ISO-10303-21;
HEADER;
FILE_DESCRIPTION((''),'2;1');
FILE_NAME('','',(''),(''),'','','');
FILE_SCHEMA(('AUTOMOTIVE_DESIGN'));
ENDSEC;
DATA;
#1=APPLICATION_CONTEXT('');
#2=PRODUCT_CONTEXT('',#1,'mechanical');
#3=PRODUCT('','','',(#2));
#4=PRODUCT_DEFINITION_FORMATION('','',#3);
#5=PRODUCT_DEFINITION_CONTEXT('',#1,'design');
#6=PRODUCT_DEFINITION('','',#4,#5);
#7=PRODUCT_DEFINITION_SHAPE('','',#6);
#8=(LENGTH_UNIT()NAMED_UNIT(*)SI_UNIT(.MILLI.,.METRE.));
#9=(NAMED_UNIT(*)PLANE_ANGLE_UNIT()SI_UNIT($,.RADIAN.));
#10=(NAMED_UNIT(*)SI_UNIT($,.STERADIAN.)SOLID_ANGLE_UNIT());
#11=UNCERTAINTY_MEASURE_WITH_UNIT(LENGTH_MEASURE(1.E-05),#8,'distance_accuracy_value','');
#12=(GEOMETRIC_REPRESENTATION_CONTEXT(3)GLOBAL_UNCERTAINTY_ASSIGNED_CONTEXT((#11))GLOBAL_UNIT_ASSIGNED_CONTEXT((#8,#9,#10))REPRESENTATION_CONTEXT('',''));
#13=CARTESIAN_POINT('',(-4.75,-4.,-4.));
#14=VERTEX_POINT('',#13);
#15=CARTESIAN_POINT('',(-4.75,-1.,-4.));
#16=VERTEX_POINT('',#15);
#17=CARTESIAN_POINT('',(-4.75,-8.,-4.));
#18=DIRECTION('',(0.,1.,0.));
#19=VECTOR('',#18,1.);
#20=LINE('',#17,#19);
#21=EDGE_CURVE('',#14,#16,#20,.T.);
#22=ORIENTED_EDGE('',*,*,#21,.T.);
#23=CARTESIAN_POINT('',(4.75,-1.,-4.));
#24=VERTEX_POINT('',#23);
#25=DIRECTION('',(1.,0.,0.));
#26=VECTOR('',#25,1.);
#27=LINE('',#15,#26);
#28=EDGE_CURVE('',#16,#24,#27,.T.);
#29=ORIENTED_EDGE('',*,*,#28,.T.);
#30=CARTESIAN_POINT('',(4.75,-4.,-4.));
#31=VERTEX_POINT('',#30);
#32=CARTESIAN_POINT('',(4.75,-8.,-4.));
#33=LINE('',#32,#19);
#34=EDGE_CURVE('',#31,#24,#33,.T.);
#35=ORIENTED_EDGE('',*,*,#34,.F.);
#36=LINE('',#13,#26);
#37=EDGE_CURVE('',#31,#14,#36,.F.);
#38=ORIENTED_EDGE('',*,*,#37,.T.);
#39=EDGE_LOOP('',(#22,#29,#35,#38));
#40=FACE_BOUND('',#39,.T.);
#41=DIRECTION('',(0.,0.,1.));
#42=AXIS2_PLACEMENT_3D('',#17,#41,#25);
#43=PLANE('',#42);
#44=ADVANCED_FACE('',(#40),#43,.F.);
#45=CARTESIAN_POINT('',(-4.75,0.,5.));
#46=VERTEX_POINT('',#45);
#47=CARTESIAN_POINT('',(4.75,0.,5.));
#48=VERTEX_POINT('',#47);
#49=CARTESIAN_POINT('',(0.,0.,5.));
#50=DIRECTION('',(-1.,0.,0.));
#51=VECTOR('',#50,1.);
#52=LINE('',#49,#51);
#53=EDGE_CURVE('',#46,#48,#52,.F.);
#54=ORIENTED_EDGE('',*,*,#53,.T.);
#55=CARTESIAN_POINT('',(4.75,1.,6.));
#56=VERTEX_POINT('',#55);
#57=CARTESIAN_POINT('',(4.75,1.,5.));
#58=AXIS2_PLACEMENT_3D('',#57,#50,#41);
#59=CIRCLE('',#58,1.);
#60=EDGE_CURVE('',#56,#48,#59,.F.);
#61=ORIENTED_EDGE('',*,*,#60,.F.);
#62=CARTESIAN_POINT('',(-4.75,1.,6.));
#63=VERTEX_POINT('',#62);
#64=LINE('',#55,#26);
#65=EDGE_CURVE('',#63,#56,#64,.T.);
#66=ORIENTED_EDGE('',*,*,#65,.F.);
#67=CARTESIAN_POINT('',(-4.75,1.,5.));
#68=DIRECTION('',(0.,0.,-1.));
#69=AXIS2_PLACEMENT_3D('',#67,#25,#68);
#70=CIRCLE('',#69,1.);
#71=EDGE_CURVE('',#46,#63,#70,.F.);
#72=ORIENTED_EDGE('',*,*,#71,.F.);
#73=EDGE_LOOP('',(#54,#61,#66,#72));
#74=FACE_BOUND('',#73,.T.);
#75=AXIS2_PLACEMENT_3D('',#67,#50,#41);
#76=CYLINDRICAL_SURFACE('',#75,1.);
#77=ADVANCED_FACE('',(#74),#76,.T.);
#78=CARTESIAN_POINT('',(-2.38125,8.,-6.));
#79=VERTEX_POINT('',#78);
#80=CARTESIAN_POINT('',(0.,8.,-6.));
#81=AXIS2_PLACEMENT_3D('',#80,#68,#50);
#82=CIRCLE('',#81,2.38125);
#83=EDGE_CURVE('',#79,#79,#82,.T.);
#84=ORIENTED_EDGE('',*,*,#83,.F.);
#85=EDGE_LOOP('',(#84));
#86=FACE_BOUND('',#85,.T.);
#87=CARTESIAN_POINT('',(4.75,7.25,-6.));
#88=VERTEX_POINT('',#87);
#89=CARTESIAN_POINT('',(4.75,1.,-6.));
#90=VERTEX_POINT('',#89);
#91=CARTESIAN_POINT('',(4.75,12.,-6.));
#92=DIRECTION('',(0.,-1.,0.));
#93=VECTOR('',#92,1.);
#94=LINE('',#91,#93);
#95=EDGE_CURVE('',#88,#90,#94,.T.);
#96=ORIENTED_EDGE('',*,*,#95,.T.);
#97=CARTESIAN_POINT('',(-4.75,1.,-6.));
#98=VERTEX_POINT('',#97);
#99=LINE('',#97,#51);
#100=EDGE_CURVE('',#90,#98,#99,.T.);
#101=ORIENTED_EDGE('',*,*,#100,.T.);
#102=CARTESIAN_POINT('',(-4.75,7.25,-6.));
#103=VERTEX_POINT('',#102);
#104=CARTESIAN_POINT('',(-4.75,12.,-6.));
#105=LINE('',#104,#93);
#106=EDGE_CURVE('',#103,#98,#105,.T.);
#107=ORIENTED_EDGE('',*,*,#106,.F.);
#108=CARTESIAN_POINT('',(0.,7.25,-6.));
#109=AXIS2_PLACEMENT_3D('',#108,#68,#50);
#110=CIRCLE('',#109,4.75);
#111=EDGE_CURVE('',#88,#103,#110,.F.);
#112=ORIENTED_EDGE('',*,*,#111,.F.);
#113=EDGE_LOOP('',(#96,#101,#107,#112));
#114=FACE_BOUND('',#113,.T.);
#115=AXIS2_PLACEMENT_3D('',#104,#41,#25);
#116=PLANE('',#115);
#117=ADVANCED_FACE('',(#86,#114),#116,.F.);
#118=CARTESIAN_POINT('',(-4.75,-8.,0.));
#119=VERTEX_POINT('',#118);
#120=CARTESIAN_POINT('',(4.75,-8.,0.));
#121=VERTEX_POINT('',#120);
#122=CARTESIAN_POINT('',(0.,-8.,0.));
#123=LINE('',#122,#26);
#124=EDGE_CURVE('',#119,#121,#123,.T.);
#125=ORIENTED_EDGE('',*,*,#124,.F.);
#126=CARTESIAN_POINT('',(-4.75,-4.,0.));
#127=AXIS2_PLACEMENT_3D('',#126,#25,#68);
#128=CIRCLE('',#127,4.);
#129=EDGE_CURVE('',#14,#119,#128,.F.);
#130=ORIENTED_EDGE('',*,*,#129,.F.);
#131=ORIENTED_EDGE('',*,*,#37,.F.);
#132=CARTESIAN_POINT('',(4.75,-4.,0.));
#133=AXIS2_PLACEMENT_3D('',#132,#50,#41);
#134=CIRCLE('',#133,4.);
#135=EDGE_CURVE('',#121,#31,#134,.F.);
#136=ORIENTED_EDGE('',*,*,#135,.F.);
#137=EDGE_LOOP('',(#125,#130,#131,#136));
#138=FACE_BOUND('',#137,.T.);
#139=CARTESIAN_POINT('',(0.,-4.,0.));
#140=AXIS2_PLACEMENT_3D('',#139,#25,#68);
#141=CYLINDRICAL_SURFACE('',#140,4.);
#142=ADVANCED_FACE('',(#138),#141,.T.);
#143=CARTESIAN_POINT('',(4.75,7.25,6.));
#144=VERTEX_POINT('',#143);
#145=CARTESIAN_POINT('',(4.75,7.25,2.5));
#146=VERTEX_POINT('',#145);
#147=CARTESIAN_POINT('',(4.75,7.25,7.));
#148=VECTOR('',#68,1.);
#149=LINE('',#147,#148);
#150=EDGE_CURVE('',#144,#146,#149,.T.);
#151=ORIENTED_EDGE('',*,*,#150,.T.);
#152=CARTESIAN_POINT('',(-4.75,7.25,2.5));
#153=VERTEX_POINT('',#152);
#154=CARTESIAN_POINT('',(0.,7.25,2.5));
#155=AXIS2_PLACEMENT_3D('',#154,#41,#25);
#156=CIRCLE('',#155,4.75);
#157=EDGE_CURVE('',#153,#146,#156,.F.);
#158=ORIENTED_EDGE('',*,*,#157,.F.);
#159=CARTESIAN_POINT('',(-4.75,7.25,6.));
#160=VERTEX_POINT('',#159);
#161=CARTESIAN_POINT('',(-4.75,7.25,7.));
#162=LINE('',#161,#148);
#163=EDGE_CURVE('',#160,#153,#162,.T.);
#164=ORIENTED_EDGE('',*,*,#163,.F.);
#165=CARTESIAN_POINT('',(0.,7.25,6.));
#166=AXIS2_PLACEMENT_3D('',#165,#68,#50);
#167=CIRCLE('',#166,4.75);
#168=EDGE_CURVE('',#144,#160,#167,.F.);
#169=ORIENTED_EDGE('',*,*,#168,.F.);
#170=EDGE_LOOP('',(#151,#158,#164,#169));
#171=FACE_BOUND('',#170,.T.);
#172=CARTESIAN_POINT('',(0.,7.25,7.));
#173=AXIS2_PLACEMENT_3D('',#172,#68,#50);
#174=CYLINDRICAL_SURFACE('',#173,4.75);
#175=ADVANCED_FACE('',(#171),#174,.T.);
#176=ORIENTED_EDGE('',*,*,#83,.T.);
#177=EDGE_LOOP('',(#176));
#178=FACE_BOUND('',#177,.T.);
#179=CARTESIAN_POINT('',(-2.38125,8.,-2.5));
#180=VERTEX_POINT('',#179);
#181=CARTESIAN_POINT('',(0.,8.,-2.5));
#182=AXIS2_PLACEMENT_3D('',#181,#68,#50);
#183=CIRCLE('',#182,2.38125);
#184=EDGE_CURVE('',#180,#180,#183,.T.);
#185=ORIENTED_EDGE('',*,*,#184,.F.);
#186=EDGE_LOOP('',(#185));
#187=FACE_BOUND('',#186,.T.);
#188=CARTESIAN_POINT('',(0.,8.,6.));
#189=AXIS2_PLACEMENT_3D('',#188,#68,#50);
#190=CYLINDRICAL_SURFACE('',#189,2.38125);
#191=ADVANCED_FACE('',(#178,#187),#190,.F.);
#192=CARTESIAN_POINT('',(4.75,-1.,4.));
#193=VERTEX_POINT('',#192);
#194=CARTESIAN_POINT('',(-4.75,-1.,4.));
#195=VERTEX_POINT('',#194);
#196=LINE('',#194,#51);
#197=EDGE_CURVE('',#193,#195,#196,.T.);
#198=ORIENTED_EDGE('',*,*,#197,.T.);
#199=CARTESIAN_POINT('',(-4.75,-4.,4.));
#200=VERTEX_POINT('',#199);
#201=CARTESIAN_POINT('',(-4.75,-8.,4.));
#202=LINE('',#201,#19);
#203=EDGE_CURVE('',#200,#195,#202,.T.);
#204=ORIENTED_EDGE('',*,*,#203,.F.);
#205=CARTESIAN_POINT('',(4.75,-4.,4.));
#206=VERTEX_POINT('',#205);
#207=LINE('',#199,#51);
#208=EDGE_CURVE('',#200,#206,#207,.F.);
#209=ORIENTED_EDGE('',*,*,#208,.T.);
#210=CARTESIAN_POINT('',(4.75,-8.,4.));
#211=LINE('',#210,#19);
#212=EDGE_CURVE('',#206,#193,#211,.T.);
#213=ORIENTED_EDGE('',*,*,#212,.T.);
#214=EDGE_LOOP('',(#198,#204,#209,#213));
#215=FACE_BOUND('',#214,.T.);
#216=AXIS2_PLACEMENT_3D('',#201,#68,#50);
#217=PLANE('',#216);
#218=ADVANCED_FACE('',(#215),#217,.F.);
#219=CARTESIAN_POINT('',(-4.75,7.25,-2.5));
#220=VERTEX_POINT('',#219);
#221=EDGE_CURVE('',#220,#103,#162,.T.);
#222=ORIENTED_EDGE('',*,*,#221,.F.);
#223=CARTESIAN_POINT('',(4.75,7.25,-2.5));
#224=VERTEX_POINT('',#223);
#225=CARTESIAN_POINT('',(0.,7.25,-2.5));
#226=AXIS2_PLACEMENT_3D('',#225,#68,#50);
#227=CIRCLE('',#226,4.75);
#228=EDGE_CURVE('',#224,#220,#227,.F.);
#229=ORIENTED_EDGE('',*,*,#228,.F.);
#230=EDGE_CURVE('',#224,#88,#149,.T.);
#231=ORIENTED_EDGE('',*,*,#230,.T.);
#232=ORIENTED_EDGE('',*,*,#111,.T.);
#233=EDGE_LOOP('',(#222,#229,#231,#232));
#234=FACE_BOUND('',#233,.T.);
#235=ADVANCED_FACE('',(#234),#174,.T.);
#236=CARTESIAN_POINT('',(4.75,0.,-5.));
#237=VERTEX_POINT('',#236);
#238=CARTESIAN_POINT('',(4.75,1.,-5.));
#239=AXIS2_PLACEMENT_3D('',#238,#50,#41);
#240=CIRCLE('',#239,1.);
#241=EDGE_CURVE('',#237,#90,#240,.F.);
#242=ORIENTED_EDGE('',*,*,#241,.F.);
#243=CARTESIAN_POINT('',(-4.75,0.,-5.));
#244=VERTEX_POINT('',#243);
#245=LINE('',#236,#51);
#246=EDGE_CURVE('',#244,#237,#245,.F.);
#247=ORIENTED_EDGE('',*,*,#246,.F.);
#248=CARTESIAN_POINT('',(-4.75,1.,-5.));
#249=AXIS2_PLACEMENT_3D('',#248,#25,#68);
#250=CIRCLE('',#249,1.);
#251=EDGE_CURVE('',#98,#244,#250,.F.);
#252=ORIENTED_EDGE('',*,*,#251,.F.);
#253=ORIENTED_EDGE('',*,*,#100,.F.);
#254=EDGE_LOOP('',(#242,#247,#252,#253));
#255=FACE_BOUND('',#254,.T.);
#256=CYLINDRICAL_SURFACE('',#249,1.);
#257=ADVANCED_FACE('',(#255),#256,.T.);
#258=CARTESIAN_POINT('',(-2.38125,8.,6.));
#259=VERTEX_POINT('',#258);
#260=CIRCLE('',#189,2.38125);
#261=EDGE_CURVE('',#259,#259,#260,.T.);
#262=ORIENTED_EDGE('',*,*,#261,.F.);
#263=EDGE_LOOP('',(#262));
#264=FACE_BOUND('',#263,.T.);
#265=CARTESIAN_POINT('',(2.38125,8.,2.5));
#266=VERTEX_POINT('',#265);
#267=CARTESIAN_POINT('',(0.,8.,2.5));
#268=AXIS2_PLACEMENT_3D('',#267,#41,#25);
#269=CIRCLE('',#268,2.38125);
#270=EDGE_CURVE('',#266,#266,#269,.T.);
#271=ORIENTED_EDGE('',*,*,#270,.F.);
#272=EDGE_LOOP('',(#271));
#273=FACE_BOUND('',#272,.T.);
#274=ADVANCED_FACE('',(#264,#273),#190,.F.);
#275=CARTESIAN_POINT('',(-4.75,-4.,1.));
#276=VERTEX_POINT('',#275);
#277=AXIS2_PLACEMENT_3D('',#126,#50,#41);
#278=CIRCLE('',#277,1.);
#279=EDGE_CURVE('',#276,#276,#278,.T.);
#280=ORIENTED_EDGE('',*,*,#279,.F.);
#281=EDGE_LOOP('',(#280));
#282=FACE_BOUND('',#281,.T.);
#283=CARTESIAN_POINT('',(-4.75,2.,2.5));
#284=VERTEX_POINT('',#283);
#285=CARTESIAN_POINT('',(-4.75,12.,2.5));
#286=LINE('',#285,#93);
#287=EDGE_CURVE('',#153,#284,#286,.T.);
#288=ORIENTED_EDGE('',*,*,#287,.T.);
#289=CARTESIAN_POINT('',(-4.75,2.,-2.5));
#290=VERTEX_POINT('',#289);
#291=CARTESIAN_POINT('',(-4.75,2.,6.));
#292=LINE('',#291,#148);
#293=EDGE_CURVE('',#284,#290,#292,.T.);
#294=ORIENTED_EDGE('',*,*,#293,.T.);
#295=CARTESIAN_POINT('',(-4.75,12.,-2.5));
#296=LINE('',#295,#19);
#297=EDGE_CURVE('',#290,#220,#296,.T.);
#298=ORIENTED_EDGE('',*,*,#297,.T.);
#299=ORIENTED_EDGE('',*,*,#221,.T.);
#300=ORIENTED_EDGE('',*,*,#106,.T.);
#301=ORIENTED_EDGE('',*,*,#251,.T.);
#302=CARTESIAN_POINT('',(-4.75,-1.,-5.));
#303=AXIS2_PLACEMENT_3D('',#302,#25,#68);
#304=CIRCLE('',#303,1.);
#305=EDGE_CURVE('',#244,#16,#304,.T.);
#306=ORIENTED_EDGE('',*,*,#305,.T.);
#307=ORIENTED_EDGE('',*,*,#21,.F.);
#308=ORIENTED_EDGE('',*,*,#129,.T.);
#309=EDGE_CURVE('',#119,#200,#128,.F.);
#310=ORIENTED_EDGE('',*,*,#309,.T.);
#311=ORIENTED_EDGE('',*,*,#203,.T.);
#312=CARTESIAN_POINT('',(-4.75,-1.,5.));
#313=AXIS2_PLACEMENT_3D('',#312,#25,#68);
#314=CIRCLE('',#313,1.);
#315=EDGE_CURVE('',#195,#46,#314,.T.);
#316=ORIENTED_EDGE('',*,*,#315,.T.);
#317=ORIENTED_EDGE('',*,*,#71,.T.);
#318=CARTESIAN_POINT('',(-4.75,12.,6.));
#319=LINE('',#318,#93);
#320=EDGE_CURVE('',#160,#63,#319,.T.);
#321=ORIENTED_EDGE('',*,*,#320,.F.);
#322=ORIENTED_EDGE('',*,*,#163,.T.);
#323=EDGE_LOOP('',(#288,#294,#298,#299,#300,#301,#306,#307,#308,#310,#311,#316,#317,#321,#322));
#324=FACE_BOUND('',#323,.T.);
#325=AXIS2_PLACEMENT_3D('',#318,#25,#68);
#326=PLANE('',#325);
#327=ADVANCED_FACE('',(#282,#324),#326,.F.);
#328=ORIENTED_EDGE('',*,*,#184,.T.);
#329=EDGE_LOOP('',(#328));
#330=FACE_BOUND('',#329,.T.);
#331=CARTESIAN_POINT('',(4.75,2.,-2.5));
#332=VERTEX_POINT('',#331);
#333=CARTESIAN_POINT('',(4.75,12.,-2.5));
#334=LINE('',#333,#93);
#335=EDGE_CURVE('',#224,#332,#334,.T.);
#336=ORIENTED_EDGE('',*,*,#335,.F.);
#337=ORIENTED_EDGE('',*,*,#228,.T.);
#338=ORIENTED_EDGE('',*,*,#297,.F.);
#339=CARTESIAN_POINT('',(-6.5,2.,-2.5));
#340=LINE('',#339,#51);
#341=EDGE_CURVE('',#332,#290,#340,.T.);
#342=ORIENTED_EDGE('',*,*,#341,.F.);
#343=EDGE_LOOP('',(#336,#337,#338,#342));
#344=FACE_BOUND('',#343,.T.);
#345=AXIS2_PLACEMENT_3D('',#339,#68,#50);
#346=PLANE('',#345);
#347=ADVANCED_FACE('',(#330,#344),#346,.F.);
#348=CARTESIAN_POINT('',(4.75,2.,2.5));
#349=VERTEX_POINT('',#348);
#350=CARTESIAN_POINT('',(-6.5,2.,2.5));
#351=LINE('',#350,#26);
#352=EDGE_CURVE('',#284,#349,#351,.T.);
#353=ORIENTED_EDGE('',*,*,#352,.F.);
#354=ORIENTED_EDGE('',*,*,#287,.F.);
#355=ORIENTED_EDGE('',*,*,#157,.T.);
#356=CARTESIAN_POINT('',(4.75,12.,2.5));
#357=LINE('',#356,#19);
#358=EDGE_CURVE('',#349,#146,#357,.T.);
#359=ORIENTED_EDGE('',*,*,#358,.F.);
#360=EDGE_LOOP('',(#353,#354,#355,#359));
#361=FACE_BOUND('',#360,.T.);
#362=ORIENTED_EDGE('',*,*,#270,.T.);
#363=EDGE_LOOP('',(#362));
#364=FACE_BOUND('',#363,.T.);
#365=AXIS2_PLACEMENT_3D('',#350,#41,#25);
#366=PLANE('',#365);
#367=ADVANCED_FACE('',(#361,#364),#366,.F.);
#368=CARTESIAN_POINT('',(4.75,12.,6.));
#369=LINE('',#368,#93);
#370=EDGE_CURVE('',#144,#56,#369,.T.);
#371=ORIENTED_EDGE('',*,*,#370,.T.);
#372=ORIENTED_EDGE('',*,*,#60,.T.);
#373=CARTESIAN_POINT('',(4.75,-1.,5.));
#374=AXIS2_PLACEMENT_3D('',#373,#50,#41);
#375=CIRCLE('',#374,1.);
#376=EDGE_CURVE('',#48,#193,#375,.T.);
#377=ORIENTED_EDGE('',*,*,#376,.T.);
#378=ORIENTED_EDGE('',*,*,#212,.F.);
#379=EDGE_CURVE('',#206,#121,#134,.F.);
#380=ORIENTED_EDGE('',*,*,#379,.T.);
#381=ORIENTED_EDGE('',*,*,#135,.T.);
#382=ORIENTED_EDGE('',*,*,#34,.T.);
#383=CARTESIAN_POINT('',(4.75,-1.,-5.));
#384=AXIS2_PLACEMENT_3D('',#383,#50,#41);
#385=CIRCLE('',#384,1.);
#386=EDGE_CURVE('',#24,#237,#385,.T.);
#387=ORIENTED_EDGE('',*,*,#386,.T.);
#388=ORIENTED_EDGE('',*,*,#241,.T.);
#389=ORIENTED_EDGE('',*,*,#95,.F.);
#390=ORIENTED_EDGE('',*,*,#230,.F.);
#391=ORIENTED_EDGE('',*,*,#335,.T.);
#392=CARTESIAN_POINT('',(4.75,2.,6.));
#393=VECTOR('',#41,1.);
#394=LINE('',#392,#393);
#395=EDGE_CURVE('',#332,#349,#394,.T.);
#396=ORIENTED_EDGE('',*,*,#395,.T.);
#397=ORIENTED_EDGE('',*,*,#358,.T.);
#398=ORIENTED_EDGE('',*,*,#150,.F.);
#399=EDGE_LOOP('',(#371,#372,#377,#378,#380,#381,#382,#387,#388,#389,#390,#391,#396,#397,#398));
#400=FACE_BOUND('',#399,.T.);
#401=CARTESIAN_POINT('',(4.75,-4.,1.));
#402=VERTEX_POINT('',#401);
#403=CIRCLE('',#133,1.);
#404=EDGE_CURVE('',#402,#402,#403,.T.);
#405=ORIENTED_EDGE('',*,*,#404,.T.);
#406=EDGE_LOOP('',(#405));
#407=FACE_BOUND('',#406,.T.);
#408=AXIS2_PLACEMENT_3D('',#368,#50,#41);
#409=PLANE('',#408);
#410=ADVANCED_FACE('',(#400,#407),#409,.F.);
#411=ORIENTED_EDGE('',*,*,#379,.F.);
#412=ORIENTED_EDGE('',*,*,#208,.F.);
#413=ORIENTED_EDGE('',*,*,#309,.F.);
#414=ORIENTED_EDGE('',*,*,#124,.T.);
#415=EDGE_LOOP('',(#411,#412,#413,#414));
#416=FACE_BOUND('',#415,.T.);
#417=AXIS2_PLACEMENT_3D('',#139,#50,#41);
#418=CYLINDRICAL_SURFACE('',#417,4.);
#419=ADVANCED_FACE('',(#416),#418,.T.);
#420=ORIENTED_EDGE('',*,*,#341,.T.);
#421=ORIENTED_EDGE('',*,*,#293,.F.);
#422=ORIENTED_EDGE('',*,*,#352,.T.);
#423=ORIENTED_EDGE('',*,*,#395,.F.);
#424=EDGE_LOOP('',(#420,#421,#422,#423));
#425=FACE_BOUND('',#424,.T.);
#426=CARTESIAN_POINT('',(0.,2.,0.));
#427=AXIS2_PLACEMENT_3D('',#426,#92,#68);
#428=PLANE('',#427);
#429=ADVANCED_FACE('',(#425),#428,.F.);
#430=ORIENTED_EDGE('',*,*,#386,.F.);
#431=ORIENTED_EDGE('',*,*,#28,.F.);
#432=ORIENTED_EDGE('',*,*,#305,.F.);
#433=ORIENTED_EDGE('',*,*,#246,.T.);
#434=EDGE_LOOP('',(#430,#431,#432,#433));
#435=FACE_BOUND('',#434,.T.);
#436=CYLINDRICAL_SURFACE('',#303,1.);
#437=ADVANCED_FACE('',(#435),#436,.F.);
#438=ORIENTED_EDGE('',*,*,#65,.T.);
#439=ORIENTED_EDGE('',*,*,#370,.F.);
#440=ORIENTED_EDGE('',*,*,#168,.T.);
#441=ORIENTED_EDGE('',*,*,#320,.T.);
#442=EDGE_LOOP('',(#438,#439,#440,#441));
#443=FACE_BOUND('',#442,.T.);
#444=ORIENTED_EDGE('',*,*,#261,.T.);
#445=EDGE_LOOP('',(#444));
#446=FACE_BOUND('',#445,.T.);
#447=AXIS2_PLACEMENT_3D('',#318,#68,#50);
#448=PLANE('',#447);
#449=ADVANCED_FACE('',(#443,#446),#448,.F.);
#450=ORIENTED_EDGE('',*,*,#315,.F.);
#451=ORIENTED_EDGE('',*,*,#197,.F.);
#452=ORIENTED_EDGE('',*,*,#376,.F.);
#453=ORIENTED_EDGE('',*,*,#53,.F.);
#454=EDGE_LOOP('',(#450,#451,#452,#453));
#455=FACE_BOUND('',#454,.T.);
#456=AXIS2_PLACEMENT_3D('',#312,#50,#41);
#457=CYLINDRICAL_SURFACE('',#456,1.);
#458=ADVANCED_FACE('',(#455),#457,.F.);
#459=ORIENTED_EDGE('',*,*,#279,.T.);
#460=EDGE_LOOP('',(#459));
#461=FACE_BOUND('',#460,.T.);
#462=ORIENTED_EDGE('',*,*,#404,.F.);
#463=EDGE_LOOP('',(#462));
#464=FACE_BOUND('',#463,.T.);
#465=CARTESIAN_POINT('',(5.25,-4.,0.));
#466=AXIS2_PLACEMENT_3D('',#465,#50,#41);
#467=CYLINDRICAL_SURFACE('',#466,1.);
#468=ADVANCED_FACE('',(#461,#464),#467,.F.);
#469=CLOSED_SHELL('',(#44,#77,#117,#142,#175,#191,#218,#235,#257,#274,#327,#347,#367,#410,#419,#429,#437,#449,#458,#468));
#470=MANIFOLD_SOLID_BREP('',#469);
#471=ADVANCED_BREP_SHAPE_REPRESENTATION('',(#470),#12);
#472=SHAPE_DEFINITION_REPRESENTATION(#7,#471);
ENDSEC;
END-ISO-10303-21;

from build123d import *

# Parameters (mm, degrees)
SKETCH1_W           = 9.5
SKETCH1_H           = 12
BOSS_EXTRUDE1_DEPTH = 12
SKETCH2_W           = 13
SKETCH2_H           = 5
CUT_EXTRUDE1_DEPTH  = 10
SKETCH3_R           = 2.38125
CUT_EXTRUDE2_DEPTH  = 18.622783549
CUT_EXTRUDE3_START  = -13
CUT_EXTRUDE3_DEPTH  = 31.622783549
SKETCH6_W           = 9.5
SKETCH6_H           = 8
BOSS_EXTRUDE3_DEPTH = 8
SKETCH7_R           = 1
CUT_EXTRUDE5_DEPTH  = 10
FILLET2_R           = 4
FILLET3_START       = -6
FILLET3_DEPTH       = 12
FILLET3_START_2     = -4.75
FILLET3_2_DEPTH     = 9.5


with BuildPart() as part:
    # Sketch1 → Boss-Extrude1 (new body)
    with BuildSketch(Plane(origin=(0, 0, 0), x_dir=(1, 0, 0), z_dir=(0, 1, 0))):
        Rectangle(SKETCH1_W, SKETCH1_H)
    extrude(amount=BOSS_EXTRUDE1_DEPTH)

    # Sketch2 → Cut-Extrude1 (cut)
    with BuildSketch(Plane(origin=(0, 12, 0), x_dir=(1, 0, 0), z_dir=(0, 1, 0))):
        Rectangle(SKETCH2_W, SKETCH2_H)
    extrude(amount=-CUT_EXTRUDE1_DEPTH, mode=Mode.SUBTRACT)

    # Sketch3 → Cut-Extrude2 (cut, through all)
    with BuildSketch(Plane(origin=(0, 0, -6), x_dir=(-1, 0, 0), z_dir=(0, 0, -1))):
        with Locations((0, 8)):
            Circle(SKETCH3_R)
    extrude(amount=-CUT_EXTRUDE2_DEPTH, mode=Mode.SUBTRACT)

    # Sketch4 → Cut-Extrude3 (cut)
    with BuildSketch(Plane(origin=(0, 0, -6), x_dir=(-1, 0, 0), z_dir=(0, 0, -1)).offset(CUT_EXTRUDE3_START)):
        with BuildLine():
            Line((-4.75, 12), (-4.75, 7.25))
            ThreePointArc((-4.75, 7.25), (-3.358757211, 10.608757211), (0, 12))
            Line((0, 12), (-4.75, 12))
        make_face()
    cut_extrude3 = extrude(amount=CUT_EXTRUDE3_DEPTH, mode=Mode.SUBTRACT)

    # Mirror1: Cut-Extrude3 across plane
    add(cut_extrude3.mirror(Plane(origin=(0, 0, 0), x_dir=(0, 0, 1), z_dir=(1, 0, 0))), mode=Mode.SUBTRACT)

    # Sketch6 → Boss-Extrude3 (add)
    with BuildSketch(Plane.XZ):
        Rectangle(SKETCH6_W, SKETCH6_H)
    extrude(amount=BOSS_EXTRUDE3_DEPTH)

    # Sketch7 → Cut-Extrude5 (cut)
    with BuildSketch(Plane.ZY.offset(4.75)):
        with Locations((0, -4)):
            Circle(SKETCH7_R)
    extrude(amount=-CUT_EXTRUDE5_DEPTH, mode=Mode.SUBTRACT)

    # Fillet2
    fillet2_edges = [part.edges().sort_by_distance(p)[0] for p in [
        (0, -8, 4),
        (0, -8, -4),
    ]]
    fillet(fillet2_edges, radius=FILLET2_R - 0.0001)  # a hair under: the kernel refuses the full size

    # Fillet3: read off the stored shape, not the designer's step
    # Fillet3 outline → Fillet3 (cut)
    with BuildSketch(Plane.YZ.offset(FILLET3_START)):
        with BuildLine():
            Line((0, 6), (0, 5))
            ThreePointArc((0, 5), (0.292893219, 5.707106781), (1, 6))
            Line((1, 6), (0, 6))
        make_face()
        with BuildLine():
            ThreePointArc((1, -6), (0.292893219, -5.707106781), (0, -5))
            Line((0, -5), (0, -6))
            Line((0, -6), (1, -6))
        make_face()
    extrude(amount=FILLET3_DEPTH, mode=Mode.SUBTRACT)

    # Fillet3 2 outline → Fillet3 2 (add)
    with BuildSketch(Plane.YZ.offset(FILLET3_START_2)):
        with BuildLine():
            Line((0, 4), (0, 5))
            ThreePointArc((0, 5), (-0.292893219, 4.292893219), (-1, 4))
            Line((-1, 4), (0, 4))
        make_face()
        with BuildLine():
            ThreePointArc((-1, -4), (-0.292893219, -4.292893219), (0, -5))
            Line((0, -5), (0, -4))
            Line((0, -4), (-1, -4))
        make_face()
    extrude(amount=FILLET3_2_DEPTH)


solid = part.part
